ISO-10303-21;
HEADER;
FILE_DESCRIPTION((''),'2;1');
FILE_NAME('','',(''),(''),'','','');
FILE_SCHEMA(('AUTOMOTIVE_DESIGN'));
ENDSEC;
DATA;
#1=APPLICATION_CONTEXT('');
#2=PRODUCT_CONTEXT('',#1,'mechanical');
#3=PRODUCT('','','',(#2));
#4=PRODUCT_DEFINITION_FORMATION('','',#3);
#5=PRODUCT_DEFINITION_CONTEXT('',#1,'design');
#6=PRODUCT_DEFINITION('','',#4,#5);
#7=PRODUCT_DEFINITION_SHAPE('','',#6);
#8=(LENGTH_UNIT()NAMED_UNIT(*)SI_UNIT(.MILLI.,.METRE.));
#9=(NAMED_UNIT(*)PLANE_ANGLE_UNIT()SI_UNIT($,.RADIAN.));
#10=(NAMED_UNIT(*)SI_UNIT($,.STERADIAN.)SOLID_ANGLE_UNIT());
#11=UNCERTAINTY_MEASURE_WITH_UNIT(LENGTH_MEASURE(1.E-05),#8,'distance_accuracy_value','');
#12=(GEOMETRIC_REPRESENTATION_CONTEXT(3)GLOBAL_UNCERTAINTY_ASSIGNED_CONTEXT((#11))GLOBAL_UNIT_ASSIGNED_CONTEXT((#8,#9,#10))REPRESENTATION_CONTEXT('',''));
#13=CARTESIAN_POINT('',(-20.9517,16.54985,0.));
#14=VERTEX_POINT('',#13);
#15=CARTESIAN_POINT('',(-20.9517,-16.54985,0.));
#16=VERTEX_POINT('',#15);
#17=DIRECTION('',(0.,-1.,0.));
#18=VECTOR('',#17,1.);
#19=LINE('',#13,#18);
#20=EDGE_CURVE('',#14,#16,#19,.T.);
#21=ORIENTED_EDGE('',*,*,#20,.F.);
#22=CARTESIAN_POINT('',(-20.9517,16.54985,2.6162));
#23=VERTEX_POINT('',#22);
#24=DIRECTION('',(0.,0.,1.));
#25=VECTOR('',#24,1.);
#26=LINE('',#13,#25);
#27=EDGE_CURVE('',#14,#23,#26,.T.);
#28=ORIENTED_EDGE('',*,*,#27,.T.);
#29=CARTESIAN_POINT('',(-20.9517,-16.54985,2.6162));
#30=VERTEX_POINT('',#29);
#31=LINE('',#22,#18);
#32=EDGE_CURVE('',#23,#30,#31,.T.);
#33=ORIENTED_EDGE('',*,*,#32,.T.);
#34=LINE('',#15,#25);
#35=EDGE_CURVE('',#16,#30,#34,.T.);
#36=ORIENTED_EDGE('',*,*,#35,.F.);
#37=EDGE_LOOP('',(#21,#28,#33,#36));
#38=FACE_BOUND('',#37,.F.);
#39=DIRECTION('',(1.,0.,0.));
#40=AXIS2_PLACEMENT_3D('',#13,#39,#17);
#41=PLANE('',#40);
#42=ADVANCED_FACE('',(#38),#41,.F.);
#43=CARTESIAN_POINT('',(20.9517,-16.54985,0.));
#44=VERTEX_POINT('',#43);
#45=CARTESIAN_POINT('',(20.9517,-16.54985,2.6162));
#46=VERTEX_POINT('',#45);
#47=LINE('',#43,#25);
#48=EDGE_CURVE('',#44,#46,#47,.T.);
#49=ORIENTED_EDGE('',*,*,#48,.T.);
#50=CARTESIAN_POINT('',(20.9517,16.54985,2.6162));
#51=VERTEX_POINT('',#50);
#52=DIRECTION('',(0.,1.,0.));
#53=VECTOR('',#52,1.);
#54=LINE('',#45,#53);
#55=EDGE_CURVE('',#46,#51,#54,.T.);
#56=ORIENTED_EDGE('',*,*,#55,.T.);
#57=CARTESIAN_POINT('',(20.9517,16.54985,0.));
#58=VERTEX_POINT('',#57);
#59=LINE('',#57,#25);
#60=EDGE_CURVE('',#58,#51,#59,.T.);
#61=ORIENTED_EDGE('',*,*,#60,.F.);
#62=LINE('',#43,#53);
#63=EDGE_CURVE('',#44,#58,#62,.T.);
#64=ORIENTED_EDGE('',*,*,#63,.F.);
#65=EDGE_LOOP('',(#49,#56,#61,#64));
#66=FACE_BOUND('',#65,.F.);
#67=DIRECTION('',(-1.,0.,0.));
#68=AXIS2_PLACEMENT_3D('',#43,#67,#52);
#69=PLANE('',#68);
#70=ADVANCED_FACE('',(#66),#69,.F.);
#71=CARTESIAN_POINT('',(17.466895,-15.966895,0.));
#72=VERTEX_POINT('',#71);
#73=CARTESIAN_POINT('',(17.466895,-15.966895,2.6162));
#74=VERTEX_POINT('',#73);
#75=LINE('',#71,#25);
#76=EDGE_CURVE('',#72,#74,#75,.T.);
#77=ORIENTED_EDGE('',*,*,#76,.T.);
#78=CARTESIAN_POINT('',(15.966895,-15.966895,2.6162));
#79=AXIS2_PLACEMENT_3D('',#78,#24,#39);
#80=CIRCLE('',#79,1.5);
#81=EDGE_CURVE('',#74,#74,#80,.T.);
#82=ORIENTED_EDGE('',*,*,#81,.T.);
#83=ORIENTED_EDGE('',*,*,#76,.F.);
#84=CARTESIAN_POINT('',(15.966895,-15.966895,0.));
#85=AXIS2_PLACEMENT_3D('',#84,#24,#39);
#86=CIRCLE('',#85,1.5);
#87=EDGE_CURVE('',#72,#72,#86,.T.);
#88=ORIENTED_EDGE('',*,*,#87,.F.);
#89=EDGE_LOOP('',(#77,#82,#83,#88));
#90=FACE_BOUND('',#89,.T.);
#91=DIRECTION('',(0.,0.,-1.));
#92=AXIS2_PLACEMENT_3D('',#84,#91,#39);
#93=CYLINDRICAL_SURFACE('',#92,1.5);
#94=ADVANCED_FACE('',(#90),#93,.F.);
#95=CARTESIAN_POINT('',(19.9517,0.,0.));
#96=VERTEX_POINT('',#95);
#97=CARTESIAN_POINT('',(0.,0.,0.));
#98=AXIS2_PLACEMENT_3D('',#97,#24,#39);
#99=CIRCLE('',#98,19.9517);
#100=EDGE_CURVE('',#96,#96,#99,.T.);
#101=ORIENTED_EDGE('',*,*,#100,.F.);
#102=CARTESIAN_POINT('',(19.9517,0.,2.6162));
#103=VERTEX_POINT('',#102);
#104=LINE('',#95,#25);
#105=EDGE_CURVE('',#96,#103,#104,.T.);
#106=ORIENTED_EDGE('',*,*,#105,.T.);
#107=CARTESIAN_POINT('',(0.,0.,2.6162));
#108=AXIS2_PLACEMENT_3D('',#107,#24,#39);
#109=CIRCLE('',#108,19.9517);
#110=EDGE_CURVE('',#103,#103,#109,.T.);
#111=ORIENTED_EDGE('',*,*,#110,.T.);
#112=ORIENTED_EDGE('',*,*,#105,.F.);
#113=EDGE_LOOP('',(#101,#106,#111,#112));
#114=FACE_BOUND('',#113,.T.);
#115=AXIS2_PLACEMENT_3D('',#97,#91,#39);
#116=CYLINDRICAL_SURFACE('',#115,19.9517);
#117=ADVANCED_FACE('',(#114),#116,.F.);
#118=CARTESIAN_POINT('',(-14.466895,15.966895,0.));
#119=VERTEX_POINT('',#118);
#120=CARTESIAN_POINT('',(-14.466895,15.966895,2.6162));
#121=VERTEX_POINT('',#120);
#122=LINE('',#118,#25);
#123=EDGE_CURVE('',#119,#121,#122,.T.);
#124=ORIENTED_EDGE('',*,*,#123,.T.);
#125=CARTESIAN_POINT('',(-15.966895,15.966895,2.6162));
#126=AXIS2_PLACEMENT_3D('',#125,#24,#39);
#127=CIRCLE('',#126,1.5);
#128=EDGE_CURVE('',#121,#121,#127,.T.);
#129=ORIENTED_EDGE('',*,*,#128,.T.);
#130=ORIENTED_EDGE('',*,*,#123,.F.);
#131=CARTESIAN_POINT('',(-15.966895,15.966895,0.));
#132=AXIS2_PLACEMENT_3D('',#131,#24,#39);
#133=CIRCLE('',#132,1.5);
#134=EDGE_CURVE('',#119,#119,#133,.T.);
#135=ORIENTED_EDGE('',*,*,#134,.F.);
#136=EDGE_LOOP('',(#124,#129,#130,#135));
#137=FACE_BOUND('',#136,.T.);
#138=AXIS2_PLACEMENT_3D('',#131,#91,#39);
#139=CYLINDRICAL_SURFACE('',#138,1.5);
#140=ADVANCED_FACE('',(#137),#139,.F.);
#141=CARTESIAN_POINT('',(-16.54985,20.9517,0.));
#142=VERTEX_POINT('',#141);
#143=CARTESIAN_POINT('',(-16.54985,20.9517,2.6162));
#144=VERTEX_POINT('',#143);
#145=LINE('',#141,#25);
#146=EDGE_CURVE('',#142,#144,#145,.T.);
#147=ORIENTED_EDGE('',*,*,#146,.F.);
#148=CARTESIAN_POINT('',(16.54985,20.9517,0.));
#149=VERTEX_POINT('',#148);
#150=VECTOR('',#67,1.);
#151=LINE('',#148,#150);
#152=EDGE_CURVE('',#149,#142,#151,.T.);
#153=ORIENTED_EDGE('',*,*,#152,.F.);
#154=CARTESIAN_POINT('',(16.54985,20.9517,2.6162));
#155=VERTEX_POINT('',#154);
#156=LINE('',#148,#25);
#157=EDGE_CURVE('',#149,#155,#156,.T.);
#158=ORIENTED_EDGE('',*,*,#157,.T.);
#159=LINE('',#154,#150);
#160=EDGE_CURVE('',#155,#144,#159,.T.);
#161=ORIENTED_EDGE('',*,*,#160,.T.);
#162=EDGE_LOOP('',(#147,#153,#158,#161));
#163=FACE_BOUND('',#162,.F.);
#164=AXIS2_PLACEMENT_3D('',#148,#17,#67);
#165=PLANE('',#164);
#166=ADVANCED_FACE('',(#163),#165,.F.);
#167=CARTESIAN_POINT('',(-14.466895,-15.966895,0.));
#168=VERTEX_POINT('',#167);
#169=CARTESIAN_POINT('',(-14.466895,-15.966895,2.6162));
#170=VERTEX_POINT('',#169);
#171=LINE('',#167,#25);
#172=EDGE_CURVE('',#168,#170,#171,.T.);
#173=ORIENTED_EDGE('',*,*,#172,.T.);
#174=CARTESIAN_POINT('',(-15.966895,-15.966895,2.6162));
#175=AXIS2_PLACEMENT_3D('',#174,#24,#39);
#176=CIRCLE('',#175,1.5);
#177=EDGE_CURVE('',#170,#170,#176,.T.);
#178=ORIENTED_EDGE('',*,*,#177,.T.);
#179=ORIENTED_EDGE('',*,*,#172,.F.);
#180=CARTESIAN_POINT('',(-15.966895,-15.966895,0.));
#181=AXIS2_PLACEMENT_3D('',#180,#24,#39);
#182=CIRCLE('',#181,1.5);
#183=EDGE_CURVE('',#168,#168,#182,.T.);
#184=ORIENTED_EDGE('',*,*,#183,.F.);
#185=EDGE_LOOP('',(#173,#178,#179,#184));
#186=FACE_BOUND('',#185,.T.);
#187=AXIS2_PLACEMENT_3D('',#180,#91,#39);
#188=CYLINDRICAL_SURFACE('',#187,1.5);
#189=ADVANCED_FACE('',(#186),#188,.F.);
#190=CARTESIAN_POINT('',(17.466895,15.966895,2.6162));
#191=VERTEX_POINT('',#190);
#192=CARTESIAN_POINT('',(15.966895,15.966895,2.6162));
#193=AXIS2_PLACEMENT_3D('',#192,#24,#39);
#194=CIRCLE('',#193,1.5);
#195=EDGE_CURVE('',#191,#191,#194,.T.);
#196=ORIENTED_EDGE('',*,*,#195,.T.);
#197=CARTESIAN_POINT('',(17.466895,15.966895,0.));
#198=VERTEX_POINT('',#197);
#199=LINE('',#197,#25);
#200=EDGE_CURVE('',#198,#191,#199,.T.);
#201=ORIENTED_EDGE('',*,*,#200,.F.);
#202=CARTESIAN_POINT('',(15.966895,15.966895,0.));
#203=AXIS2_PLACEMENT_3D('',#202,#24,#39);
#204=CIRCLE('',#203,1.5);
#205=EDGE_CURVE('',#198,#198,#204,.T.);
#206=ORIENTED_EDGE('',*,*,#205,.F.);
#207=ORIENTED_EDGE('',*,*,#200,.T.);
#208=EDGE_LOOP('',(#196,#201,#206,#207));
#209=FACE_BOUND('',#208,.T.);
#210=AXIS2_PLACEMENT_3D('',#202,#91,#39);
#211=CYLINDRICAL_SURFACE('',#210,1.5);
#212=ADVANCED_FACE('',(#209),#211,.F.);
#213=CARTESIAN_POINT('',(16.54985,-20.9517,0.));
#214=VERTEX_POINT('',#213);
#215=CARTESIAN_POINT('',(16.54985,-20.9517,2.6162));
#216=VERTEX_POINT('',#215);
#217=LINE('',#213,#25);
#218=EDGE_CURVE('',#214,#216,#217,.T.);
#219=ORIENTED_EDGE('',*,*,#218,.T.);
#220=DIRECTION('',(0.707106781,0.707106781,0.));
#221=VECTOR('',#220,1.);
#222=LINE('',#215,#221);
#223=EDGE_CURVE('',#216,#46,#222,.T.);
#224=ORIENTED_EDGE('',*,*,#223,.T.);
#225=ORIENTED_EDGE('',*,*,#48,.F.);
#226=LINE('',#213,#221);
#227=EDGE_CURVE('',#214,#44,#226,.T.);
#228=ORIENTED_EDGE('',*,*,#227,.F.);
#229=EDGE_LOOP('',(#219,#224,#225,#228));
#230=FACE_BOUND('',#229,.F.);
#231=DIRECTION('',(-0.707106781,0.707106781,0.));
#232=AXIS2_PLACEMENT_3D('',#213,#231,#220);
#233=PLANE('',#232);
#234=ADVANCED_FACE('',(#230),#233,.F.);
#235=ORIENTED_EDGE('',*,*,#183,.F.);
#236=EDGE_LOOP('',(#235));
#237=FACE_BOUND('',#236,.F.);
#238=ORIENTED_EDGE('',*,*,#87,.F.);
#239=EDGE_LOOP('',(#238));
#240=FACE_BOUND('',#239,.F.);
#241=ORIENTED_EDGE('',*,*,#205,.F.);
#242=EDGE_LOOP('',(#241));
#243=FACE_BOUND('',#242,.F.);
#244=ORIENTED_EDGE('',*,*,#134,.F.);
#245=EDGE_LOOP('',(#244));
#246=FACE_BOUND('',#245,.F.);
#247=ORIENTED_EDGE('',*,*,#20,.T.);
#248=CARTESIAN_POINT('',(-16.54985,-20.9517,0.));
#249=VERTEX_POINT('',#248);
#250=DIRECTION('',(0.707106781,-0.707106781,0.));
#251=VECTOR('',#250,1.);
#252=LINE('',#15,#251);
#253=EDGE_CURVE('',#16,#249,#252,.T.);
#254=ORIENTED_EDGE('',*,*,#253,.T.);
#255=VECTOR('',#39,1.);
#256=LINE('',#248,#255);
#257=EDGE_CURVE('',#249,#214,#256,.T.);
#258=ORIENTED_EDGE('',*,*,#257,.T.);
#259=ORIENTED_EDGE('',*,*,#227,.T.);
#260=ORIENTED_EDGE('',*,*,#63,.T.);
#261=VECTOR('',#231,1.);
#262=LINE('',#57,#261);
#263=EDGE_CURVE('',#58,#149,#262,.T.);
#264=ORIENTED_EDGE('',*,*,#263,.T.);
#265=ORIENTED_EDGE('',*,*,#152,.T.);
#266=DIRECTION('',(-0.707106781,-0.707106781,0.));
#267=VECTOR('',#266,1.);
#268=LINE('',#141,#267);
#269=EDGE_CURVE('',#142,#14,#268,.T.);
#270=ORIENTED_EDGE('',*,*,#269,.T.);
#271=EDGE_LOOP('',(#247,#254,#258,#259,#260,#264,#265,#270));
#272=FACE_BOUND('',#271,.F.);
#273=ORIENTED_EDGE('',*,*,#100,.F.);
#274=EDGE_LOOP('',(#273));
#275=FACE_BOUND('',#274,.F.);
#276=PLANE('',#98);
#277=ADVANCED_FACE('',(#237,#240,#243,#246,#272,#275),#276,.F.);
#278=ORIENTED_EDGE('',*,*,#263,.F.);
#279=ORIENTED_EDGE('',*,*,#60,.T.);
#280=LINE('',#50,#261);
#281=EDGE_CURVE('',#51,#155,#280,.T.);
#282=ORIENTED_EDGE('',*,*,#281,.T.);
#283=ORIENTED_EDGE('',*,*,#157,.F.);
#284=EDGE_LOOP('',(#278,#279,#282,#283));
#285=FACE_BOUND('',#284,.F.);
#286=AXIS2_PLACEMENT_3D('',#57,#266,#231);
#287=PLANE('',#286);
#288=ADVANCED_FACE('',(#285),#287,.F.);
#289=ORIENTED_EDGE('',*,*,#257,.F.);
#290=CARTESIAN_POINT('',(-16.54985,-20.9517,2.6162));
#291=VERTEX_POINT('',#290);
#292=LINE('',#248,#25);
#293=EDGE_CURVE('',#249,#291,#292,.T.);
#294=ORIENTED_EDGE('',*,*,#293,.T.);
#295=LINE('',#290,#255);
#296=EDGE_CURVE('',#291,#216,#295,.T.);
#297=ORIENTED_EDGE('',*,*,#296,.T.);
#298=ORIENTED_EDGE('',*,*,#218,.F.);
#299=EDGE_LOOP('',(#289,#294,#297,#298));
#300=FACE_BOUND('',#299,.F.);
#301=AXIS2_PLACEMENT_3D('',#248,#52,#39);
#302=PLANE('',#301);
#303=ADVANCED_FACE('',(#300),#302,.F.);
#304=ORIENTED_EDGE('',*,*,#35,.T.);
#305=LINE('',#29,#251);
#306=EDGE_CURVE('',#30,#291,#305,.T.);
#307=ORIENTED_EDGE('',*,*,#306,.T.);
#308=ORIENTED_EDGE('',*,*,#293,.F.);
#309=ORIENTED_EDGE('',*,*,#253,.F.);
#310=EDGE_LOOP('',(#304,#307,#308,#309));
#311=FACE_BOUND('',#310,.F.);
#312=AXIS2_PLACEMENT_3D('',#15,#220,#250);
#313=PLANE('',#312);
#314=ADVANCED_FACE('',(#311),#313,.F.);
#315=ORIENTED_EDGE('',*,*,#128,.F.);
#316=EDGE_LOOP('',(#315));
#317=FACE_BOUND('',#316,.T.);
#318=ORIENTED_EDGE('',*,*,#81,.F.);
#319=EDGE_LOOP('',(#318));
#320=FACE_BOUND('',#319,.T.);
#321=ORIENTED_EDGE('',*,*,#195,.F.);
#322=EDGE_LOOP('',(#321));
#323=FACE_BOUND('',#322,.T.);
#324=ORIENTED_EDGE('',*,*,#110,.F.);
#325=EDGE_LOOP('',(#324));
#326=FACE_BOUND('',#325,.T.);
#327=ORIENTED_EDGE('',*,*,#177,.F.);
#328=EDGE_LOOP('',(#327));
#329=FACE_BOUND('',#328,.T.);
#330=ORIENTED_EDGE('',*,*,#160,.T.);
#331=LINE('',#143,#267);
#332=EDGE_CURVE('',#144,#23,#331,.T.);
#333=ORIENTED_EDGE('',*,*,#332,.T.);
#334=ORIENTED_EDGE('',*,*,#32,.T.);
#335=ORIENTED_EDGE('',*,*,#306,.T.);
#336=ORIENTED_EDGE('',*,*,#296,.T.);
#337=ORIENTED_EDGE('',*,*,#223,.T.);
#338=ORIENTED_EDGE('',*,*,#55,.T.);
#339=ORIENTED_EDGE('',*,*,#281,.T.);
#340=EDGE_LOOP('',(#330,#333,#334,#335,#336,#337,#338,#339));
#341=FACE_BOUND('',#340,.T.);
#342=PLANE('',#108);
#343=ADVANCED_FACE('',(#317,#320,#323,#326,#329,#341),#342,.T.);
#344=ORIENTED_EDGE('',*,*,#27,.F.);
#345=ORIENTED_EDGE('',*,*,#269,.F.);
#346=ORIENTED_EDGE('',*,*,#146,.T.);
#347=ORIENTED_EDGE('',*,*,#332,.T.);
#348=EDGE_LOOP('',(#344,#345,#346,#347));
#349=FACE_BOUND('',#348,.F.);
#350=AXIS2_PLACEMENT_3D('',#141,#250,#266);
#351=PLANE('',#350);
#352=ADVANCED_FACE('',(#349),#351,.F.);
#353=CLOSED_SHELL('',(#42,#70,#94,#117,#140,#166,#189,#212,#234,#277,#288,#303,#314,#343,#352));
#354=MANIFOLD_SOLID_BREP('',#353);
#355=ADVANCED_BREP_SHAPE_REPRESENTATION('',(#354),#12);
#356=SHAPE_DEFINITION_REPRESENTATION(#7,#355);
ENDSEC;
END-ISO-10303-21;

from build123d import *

# Parameters (mm, degrees)
F0_R     = 1.5
F0_R_2   = 19.9517
F1_DEPTH = 2.6162


with BuildPart() as f1:
    # F0 (on Top) → F1 (new body)
    with BuildSketch(Plane.XY):
        Polygon((-16.5498495616, -20.9517), (16.5498495616, -20.9517), (20.9517, -16.5498495616), (20.9517, 16.5498495616), (16.5498495616, 20.9517), (-16.5498495616, 20.9517), (-20.9517, 16.5498495616), (-20.9517, -16.5498495616), align=None)
        with Locations((-15.9668953833, -15.9668953833)):
            Circle(F0_R, mode=Mode.SUBTRACT)
        with Locations((15.9668953833, -15.9668953833)):
            Circle(F0_R, mode=Mode.SUBTRACT)
        with Locations((-15.9668953833, 15.9668953833)):
            Circle(F0_R, mode=Mode.SUBTRACT)
        Circle(F0_R_2, mode=Mode.SUBTRACT)
        with Locations((15.9668953833, 15.9668953833)):
            Circle(F0_R, mode=Mode.SUBTRACT)
    extrude(amount=F1_DEPTH)


solid = f1.part
